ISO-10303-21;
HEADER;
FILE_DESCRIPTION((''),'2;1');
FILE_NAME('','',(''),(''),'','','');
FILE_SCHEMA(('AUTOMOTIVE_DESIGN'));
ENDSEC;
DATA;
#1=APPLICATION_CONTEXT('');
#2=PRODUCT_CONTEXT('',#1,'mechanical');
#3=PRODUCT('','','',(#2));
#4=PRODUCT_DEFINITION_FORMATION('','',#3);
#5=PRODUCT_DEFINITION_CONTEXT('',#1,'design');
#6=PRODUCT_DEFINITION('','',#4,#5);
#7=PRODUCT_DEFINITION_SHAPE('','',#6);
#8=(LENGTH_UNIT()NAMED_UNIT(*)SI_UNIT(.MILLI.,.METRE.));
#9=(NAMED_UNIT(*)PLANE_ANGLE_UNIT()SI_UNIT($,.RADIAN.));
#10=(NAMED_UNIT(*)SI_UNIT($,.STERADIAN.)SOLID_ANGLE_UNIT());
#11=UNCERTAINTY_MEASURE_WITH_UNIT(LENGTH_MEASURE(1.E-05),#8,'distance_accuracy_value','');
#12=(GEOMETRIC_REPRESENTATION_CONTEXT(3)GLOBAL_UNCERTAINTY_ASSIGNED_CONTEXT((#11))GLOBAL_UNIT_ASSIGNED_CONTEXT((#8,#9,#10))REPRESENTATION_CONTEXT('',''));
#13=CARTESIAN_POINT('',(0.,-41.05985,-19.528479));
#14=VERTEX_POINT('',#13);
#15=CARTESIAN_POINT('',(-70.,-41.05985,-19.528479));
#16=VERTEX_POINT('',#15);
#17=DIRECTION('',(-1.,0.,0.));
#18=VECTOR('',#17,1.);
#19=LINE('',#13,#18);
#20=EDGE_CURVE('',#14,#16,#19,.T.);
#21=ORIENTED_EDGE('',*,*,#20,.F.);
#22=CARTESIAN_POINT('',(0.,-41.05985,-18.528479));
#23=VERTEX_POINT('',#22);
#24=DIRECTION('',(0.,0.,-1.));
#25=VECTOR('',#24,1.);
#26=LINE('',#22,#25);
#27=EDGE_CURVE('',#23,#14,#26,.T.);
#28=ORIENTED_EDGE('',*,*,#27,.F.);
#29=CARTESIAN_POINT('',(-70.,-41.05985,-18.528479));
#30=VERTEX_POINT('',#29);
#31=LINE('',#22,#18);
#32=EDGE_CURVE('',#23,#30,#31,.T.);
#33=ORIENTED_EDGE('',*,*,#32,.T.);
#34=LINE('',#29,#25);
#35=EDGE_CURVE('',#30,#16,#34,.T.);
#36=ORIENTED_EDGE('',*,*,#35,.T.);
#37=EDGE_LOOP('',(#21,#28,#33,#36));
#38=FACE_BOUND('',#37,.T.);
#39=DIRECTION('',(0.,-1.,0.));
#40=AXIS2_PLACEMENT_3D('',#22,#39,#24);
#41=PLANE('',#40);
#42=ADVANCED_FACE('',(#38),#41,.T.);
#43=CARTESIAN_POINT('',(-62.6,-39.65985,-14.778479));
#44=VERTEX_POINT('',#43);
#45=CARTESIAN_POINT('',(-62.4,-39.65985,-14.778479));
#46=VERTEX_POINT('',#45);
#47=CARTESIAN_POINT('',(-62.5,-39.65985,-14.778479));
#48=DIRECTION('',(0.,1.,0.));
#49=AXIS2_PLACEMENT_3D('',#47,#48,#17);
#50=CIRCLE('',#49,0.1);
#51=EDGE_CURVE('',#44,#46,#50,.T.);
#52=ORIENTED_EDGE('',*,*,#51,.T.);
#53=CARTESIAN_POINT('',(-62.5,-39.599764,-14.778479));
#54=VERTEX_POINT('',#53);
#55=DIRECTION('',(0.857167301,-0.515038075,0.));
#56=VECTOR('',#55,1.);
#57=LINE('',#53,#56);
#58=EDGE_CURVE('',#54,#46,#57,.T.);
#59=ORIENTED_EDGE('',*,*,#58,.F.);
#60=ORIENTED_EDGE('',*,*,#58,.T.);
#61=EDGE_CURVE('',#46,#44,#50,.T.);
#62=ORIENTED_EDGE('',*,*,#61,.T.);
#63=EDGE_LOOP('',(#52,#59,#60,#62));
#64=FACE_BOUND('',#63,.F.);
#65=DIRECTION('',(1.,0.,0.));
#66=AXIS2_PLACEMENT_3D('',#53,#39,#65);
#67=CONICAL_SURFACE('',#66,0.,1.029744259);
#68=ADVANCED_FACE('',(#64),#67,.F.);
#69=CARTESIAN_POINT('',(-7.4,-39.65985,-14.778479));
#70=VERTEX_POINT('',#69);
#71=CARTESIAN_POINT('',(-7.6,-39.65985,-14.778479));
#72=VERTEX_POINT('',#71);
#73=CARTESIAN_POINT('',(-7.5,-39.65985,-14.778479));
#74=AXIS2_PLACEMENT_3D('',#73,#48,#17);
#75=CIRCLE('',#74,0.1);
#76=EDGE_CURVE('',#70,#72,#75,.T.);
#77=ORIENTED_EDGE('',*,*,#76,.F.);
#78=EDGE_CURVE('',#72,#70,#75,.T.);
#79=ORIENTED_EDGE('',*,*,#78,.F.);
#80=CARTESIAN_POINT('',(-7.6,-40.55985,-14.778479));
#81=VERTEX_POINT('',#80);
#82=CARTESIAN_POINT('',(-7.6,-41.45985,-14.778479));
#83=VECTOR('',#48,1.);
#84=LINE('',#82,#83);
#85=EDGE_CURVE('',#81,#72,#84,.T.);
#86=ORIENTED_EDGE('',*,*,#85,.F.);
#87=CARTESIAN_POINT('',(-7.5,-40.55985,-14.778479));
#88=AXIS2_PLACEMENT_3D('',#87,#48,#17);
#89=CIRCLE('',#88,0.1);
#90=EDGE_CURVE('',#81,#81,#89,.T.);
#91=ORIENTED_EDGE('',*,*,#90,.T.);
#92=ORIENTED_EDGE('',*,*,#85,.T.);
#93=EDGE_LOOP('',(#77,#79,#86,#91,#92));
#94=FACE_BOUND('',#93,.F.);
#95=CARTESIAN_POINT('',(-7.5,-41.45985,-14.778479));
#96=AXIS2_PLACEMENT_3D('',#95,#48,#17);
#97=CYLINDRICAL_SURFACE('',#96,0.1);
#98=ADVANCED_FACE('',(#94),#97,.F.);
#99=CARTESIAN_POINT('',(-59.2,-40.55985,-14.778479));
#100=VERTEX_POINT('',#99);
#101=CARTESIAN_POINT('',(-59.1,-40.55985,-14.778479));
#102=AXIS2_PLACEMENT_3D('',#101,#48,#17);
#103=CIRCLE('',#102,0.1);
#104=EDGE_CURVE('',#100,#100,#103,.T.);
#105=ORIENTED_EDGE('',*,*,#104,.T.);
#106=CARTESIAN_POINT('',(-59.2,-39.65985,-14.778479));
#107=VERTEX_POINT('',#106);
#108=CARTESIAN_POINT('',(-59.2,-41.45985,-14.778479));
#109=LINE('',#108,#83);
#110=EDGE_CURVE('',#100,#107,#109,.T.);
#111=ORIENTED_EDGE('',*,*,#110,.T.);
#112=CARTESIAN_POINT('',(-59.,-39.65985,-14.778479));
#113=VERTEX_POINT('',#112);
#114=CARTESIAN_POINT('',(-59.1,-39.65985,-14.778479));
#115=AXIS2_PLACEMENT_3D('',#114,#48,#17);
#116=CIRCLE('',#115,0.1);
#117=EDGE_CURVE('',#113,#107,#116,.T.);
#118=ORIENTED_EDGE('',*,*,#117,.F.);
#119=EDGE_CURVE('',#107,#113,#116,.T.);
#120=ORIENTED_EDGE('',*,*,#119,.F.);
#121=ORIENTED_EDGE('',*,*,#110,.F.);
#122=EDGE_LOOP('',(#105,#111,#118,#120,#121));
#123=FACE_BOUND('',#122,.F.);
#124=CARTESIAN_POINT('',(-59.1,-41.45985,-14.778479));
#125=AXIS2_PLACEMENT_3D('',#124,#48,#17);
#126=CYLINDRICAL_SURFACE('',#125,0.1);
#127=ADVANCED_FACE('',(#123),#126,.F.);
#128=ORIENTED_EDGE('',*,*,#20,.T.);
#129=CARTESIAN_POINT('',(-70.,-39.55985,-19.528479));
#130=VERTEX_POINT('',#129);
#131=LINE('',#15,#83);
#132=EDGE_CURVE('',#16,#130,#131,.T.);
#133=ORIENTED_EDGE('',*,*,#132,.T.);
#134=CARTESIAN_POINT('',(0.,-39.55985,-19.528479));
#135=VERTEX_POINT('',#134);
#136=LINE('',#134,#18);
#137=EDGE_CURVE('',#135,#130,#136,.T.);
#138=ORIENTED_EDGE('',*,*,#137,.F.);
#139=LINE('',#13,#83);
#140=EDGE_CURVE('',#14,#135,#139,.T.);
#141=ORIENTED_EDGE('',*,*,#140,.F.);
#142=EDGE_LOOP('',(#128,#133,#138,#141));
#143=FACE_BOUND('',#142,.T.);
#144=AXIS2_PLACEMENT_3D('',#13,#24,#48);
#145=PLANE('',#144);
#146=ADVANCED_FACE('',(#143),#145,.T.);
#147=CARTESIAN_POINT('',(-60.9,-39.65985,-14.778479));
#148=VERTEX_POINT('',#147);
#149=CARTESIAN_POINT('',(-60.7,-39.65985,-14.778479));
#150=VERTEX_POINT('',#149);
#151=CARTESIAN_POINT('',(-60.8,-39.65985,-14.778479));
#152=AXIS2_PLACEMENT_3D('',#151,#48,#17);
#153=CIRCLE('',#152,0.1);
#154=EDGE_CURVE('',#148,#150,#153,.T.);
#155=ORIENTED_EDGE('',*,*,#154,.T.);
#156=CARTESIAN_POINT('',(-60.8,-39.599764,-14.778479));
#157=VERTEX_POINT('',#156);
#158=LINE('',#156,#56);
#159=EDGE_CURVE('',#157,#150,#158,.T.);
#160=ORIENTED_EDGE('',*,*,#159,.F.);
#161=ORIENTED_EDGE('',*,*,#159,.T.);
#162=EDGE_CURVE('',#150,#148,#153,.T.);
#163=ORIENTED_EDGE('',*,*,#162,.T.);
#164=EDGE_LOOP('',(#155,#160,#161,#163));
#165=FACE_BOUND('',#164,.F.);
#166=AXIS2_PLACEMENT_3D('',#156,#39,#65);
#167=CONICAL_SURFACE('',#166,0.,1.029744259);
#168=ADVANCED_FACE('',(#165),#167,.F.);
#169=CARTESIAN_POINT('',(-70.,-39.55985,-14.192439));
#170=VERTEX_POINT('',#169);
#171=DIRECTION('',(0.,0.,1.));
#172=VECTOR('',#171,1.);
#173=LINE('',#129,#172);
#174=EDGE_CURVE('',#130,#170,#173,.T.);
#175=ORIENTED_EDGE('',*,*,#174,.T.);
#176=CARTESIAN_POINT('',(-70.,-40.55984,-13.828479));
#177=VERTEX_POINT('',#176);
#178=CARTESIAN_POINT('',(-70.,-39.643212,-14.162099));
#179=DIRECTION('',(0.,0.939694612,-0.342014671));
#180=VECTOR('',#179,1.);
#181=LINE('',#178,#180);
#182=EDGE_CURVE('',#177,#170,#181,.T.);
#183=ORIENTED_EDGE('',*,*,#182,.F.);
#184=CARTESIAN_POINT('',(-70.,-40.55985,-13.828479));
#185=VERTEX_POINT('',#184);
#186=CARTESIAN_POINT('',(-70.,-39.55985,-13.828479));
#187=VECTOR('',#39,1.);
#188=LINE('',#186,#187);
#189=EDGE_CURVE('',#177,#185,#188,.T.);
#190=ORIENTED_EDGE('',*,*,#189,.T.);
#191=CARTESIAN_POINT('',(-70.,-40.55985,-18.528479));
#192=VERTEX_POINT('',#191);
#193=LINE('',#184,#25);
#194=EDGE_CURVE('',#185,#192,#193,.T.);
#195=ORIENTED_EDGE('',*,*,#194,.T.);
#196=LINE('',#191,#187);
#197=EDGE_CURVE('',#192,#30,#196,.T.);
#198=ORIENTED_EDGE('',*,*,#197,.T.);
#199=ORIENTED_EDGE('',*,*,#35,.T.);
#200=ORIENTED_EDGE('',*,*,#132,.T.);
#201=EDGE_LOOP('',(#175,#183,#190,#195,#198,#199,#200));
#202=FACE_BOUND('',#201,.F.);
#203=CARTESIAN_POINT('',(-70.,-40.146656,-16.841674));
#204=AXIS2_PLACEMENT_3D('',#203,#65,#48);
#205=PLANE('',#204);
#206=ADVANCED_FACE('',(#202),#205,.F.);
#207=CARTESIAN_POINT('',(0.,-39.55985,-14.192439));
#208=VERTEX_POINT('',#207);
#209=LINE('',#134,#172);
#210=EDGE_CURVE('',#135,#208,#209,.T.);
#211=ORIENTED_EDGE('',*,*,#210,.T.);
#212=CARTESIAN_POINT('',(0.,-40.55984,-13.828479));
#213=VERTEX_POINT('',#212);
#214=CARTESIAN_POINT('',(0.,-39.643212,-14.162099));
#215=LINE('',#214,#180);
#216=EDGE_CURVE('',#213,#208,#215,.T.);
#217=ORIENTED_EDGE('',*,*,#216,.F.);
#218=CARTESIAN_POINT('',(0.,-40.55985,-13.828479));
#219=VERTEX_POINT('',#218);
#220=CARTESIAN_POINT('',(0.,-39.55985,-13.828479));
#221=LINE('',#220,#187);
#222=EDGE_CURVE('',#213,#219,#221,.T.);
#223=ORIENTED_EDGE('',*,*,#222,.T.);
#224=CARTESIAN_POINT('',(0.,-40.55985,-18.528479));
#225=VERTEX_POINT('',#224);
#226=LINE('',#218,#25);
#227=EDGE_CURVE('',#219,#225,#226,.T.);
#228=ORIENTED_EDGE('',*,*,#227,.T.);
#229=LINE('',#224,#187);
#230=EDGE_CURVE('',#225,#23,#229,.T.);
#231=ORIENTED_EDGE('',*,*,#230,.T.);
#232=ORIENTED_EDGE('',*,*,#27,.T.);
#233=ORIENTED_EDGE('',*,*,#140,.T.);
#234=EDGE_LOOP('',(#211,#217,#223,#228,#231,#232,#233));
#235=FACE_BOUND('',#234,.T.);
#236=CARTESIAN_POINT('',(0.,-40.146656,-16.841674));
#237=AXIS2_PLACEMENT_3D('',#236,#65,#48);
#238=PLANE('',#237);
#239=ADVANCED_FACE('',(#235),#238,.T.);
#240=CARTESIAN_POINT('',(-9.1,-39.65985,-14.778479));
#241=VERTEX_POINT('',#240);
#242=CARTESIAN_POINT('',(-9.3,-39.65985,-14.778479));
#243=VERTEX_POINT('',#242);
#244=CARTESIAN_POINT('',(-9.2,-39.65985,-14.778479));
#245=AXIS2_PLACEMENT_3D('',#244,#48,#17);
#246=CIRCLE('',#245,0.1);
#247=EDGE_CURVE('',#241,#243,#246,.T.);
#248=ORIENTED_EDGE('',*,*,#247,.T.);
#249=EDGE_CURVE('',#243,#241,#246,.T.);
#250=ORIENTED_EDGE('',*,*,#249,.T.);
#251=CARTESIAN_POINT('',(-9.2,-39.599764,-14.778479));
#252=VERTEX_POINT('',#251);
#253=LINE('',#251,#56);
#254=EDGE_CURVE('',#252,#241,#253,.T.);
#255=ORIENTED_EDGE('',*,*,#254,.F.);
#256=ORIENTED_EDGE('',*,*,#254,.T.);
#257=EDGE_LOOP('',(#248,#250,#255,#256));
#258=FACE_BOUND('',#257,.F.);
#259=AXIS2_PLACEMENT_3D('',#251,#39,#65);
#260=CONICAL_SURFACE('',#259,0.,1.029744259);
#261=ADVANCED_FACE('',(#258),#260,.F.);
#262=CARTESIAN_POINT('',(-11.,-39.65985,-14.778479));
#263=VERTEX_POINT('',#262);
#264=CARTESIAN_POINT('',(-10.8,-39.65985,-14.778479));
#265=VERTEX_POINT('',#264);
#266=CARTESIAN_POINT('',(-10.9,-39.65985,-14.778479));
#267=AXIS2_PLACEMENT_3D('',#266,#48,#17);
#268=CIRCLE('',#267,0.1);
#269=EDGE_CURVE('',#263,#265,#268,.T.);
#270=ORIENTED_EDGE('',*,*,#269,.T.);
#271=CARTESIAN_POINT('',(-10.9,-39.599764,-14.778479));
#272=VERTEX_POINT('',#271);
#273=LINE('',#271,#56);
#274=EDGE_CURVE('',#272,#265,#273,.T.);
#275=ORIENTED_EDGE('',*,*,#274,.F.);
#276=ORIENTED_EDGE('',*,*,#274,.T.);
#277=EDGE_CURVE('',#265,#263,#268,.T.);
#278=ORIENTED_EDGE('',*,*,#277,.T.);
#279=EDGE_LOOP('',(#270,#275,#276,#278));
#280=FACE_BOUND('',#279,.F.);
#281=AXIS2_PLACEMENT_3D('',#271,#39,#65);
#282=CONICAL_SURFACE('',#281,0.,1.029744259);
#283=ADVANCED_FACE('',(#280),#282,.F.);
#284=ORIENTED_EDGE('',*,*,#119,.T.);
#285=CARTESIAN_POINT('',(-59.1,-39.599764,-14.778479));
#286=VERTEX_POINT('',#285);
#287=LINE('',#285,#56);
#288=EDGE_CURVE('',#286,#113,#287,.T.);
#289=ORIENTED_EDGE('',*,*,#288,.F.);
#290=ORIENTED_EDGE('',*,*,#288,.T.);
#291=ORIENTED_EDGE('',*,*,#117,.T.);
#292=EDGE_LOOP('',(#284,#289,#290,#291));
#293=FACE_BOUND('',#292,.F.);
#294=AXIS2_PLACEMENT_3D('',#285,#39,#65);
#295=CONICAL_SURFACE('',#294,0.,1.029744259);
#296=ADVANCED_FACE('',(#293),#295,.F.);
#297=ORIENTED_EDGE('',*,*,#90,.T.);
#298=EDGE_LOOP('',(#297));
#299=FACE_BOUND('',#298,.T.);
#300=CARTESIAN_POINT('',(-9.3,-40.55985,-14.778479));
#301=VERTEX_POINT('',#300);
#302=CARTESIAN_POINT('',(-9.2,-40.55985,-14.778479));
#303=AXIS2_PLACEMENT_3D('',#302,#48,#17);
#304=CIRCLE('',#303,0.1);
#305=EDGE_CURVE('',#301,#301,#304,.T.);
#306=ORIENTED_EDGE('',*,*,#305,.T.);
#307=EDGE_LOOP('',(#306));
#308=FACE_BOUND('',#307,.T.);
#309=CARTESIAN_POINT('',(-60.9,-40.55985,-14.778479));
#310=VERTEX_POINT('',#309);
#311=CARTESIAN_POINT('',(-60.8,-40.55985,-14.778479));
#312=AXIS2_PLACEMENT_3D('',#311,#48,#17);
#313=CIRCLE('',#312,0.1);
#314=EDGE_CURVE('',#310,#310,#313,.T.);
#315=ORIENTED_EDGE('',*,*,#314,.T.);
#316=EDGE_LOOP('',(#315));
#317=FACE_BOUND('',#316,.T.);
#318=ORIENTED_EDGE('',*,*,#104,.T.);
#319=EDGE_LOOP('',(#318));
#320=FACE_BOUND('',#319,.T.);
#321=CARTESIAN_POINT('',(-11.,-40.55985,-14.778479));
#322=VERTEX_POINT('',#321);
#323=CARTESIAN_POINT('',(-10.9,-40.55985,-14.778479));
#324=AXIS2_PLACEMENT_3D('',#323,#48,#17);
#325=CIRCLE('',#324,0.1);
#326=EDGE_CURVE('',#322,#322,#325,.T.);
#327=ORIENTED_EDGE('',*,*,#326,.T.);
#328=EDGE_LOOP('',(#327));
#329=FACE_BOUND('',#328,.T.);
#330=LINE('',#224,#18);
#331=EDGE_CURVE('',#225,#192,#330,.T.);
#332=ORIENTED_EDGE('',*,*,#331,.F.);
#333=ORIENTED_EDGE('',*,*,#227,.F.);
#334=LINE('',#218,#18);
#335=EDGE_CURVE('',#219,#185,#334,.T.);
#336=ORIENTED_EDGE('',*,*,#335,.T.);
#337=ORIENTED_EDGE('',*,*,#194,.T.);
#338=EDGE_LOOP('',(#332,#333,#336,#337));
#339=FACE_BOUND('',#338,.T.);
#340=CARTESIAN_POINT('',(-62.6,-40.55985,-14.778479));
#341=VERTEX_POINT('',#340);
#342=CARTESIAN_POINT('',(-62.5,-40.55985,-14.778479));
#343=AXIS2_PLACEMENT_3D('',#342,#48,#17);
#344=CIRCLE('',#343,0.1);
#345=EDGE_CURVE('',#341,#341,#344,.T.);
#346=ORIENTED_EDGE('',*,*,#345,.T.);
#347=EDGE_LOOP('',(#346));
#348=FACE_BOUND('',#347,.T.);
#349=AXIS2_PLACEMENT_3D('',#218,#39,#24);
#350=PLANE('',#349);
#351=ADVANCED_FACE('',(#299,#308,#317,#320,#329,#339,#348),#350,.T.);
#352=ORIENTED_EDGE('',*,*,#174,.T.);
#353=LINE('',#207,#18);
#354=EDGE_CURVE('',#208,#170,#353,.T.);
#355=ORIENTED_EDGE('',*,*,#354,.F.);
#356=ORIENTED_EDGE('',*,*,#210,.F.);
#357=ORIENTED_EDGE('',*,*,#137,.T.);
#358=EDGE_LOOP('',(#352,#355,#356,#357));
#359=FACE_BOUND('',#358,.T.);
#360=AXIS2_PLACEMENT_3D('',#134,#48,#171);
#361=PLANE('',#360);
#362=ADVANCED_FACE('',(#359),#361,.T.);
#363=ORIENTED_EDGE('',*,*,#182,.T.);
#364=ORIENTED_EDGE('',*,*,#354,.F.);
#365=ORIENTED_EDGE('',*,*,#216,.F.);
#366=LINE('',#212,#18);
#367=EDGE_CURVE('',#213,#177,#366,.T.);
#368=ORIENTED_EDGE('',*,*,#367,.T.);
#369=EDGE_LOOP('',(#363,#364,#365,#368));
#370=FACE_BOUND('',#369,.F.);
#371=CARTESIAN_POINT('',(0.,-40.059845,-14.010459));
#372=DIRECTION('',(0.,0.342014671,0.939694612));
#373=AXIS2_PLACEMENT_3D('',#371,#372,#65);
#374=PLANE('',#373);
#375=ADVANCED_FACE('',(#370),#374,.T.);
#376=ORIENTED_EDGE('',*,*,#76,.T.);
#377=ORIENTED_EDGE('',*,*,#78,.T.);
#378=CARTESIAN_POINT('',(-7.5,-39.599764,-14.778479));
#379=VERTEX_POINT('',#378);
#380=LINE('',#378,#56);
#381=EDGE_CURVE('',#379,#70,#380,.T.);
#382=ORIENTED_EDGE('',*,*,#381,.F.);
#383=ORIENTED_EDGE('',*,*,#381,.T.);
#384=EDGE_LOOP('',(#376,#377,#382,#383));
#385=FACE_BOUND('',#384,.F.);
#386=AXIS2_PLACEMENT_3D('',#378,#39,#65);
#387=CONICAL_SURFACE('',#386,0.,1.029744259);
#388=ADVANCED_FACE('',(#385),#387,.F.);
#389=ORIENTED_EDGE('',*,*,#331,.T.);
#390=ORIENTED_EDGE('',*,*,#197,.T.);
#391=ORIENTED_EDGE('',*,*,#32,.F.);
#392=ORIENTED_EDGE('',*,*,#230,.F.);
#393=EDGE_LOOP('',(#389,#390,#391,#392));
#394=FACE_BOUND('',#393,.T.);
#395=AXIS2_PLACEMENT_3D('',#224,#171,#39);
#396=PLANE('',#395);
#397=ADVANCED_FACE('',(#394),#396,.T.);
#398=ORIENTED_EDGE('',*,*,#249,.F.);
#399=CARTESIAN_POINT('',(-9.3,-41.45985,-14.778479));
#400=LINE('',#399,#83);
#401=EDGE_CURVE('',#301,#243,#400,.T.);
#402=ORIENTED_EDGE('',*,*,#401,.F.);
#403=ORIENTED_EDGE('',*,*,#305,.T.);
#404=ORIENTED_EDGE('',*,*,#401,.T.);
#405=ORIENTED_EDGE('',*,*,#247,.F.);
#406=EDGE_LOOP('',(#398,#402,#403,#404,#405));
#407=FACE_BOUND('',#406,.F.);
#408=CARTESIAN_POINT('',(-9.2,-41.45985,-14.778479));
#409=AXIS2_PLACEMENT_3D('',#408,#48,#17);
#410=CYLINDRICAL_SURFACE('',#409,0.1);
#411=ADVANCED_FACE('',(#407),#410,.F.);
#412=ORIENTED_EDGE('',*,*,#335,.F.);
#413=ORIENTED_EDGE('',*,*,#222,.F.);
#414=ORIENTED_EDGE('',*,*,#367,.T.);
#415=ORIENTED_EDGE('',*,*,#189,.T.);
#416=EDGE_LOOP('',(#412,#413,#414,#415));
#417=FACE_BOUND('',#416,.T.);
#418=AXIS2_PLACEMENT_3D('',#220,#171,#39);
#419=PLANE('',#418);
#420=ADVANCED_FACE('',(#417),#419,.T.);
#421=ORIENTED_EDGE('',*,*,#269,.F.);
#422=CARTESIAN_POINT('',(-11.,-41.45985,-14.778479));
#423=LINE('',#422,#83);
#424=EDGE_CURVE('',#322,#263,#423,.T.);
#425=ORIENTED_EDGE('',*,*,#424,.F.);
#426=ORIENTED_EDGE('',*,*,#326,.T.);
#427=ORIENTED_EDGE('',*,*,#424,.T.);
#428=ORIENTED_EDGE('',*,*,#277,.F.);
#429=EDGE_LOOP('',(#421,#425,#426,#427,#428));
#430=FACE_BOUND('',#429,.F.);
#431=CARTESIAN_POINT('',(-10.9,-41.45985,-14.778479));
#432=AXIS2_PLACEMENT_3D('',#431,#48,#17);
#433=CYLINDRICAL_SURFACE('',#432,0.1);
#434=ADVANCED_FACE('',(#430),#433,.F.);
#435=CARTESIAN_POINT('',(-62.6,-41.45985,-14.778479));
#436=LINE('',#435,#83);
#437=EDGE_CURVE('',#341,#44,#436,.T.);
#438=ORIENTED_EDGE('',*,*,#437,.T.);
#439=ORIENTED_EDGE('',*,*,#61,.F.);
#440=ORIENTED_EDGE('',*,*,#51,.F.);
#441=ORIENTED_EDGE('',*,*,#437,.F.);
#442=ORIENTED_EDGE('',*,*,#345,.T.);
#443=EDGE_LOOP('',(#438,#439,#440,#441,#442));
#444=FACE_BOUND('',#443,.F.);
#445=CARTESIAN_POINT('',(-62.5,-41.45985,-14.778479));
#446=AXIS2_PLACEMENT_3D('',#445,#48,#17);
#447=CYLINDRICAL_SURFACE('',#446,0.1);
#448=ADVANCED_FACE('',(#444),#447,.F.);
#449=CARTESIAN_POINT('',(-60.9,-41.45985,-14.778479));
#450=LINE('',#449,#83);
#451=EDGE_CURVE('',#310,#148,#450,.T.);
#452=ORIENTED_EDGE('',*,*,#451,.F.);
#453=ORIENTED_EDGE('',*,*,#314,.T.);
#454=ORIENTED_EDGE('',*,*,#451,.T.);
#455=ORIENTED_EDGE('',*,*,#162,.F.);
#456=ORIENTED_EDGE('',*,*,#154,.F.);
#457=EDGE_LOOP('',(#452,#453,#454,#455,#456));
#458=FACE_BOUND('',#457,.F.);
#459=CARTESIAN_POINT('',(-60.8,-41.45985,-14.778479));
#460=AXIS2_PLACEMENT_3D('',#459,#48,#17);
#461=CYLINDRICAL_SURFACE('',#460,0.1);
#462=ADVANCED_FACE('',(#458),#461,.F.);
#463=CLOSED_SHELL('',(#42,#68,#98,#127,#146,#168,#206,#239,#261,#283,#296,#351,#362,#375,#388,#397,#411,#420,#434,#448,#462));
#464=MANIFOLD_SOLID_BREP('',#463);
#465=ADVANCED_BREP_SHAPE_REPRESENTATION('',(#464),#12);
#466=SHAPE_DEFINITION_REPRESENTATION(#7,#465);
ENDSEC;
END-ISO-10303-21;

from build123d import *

# Parameters (mm, degrees)
F1_DEPTH = 70
F2_SIZE2 = 0.36396
F2_SIZE  = 0.99999
F4_D     = 0.2
F4_DEPTH = 0.9
F4_TIP   = 0.0600860619


# Not quite as in the source:
# - a fillet or chamfer is up to 0.001 mm smaller than in the source, because OpenCascade refuses the exact size


with BuildPart() as f1:
    # F0 (on Right) → F1 (new body)
    with BuildSketch(Plane.YZ):
        Polygon((-39.5598503354, -13.8284793004), (-40.5598503354, -13.8284793004), (-40.5598503354, -18.5284793004), (-41.0598503354, -18.5284793004), (-41.0598503354, -19.5284793004), (-39.5598503354, -19.5284793004), align=None)
    extrude(amount=-F1_DEPTH)

    # F2 (size 1 and 0.3639702343 in the source; OpenCascade refuses exactly that, so slightly less here)
    f2_edges = [f1.edges().sort_by_distance(p)[0] for p in [
        (-35, -39.55985, -13.828479),
    ]]
    f2_side = f1.faces().sort_by_distance((-35, -40.05985, -13.828479))[0]
    chamfer(f2_edges, length=F2_SIZE, length2=F2_SIZE2, reference=f2_side)

    # F4
    with Locations(Plane.XZ.offset(40.5598503354)):
        with Locations((-62.5, -14.7784793004), (-60.8, -14.7784793004), (-59.1, -14.7784793004), (-10.9, -14.7784793004), (-9.2, -14.7784793004), (-7.5, -14.7784793004)):
            Hole(F4_D / 2, depth=F4_DEPTH)
            with Locations((0, 0, -(F4_DEPTH + F4_TIP / 2))):  # 118° drill point
                Cone(0, F4_D / 2, F4_TIP, mode=Mode.SUBTRACT)


solid = f1.part
